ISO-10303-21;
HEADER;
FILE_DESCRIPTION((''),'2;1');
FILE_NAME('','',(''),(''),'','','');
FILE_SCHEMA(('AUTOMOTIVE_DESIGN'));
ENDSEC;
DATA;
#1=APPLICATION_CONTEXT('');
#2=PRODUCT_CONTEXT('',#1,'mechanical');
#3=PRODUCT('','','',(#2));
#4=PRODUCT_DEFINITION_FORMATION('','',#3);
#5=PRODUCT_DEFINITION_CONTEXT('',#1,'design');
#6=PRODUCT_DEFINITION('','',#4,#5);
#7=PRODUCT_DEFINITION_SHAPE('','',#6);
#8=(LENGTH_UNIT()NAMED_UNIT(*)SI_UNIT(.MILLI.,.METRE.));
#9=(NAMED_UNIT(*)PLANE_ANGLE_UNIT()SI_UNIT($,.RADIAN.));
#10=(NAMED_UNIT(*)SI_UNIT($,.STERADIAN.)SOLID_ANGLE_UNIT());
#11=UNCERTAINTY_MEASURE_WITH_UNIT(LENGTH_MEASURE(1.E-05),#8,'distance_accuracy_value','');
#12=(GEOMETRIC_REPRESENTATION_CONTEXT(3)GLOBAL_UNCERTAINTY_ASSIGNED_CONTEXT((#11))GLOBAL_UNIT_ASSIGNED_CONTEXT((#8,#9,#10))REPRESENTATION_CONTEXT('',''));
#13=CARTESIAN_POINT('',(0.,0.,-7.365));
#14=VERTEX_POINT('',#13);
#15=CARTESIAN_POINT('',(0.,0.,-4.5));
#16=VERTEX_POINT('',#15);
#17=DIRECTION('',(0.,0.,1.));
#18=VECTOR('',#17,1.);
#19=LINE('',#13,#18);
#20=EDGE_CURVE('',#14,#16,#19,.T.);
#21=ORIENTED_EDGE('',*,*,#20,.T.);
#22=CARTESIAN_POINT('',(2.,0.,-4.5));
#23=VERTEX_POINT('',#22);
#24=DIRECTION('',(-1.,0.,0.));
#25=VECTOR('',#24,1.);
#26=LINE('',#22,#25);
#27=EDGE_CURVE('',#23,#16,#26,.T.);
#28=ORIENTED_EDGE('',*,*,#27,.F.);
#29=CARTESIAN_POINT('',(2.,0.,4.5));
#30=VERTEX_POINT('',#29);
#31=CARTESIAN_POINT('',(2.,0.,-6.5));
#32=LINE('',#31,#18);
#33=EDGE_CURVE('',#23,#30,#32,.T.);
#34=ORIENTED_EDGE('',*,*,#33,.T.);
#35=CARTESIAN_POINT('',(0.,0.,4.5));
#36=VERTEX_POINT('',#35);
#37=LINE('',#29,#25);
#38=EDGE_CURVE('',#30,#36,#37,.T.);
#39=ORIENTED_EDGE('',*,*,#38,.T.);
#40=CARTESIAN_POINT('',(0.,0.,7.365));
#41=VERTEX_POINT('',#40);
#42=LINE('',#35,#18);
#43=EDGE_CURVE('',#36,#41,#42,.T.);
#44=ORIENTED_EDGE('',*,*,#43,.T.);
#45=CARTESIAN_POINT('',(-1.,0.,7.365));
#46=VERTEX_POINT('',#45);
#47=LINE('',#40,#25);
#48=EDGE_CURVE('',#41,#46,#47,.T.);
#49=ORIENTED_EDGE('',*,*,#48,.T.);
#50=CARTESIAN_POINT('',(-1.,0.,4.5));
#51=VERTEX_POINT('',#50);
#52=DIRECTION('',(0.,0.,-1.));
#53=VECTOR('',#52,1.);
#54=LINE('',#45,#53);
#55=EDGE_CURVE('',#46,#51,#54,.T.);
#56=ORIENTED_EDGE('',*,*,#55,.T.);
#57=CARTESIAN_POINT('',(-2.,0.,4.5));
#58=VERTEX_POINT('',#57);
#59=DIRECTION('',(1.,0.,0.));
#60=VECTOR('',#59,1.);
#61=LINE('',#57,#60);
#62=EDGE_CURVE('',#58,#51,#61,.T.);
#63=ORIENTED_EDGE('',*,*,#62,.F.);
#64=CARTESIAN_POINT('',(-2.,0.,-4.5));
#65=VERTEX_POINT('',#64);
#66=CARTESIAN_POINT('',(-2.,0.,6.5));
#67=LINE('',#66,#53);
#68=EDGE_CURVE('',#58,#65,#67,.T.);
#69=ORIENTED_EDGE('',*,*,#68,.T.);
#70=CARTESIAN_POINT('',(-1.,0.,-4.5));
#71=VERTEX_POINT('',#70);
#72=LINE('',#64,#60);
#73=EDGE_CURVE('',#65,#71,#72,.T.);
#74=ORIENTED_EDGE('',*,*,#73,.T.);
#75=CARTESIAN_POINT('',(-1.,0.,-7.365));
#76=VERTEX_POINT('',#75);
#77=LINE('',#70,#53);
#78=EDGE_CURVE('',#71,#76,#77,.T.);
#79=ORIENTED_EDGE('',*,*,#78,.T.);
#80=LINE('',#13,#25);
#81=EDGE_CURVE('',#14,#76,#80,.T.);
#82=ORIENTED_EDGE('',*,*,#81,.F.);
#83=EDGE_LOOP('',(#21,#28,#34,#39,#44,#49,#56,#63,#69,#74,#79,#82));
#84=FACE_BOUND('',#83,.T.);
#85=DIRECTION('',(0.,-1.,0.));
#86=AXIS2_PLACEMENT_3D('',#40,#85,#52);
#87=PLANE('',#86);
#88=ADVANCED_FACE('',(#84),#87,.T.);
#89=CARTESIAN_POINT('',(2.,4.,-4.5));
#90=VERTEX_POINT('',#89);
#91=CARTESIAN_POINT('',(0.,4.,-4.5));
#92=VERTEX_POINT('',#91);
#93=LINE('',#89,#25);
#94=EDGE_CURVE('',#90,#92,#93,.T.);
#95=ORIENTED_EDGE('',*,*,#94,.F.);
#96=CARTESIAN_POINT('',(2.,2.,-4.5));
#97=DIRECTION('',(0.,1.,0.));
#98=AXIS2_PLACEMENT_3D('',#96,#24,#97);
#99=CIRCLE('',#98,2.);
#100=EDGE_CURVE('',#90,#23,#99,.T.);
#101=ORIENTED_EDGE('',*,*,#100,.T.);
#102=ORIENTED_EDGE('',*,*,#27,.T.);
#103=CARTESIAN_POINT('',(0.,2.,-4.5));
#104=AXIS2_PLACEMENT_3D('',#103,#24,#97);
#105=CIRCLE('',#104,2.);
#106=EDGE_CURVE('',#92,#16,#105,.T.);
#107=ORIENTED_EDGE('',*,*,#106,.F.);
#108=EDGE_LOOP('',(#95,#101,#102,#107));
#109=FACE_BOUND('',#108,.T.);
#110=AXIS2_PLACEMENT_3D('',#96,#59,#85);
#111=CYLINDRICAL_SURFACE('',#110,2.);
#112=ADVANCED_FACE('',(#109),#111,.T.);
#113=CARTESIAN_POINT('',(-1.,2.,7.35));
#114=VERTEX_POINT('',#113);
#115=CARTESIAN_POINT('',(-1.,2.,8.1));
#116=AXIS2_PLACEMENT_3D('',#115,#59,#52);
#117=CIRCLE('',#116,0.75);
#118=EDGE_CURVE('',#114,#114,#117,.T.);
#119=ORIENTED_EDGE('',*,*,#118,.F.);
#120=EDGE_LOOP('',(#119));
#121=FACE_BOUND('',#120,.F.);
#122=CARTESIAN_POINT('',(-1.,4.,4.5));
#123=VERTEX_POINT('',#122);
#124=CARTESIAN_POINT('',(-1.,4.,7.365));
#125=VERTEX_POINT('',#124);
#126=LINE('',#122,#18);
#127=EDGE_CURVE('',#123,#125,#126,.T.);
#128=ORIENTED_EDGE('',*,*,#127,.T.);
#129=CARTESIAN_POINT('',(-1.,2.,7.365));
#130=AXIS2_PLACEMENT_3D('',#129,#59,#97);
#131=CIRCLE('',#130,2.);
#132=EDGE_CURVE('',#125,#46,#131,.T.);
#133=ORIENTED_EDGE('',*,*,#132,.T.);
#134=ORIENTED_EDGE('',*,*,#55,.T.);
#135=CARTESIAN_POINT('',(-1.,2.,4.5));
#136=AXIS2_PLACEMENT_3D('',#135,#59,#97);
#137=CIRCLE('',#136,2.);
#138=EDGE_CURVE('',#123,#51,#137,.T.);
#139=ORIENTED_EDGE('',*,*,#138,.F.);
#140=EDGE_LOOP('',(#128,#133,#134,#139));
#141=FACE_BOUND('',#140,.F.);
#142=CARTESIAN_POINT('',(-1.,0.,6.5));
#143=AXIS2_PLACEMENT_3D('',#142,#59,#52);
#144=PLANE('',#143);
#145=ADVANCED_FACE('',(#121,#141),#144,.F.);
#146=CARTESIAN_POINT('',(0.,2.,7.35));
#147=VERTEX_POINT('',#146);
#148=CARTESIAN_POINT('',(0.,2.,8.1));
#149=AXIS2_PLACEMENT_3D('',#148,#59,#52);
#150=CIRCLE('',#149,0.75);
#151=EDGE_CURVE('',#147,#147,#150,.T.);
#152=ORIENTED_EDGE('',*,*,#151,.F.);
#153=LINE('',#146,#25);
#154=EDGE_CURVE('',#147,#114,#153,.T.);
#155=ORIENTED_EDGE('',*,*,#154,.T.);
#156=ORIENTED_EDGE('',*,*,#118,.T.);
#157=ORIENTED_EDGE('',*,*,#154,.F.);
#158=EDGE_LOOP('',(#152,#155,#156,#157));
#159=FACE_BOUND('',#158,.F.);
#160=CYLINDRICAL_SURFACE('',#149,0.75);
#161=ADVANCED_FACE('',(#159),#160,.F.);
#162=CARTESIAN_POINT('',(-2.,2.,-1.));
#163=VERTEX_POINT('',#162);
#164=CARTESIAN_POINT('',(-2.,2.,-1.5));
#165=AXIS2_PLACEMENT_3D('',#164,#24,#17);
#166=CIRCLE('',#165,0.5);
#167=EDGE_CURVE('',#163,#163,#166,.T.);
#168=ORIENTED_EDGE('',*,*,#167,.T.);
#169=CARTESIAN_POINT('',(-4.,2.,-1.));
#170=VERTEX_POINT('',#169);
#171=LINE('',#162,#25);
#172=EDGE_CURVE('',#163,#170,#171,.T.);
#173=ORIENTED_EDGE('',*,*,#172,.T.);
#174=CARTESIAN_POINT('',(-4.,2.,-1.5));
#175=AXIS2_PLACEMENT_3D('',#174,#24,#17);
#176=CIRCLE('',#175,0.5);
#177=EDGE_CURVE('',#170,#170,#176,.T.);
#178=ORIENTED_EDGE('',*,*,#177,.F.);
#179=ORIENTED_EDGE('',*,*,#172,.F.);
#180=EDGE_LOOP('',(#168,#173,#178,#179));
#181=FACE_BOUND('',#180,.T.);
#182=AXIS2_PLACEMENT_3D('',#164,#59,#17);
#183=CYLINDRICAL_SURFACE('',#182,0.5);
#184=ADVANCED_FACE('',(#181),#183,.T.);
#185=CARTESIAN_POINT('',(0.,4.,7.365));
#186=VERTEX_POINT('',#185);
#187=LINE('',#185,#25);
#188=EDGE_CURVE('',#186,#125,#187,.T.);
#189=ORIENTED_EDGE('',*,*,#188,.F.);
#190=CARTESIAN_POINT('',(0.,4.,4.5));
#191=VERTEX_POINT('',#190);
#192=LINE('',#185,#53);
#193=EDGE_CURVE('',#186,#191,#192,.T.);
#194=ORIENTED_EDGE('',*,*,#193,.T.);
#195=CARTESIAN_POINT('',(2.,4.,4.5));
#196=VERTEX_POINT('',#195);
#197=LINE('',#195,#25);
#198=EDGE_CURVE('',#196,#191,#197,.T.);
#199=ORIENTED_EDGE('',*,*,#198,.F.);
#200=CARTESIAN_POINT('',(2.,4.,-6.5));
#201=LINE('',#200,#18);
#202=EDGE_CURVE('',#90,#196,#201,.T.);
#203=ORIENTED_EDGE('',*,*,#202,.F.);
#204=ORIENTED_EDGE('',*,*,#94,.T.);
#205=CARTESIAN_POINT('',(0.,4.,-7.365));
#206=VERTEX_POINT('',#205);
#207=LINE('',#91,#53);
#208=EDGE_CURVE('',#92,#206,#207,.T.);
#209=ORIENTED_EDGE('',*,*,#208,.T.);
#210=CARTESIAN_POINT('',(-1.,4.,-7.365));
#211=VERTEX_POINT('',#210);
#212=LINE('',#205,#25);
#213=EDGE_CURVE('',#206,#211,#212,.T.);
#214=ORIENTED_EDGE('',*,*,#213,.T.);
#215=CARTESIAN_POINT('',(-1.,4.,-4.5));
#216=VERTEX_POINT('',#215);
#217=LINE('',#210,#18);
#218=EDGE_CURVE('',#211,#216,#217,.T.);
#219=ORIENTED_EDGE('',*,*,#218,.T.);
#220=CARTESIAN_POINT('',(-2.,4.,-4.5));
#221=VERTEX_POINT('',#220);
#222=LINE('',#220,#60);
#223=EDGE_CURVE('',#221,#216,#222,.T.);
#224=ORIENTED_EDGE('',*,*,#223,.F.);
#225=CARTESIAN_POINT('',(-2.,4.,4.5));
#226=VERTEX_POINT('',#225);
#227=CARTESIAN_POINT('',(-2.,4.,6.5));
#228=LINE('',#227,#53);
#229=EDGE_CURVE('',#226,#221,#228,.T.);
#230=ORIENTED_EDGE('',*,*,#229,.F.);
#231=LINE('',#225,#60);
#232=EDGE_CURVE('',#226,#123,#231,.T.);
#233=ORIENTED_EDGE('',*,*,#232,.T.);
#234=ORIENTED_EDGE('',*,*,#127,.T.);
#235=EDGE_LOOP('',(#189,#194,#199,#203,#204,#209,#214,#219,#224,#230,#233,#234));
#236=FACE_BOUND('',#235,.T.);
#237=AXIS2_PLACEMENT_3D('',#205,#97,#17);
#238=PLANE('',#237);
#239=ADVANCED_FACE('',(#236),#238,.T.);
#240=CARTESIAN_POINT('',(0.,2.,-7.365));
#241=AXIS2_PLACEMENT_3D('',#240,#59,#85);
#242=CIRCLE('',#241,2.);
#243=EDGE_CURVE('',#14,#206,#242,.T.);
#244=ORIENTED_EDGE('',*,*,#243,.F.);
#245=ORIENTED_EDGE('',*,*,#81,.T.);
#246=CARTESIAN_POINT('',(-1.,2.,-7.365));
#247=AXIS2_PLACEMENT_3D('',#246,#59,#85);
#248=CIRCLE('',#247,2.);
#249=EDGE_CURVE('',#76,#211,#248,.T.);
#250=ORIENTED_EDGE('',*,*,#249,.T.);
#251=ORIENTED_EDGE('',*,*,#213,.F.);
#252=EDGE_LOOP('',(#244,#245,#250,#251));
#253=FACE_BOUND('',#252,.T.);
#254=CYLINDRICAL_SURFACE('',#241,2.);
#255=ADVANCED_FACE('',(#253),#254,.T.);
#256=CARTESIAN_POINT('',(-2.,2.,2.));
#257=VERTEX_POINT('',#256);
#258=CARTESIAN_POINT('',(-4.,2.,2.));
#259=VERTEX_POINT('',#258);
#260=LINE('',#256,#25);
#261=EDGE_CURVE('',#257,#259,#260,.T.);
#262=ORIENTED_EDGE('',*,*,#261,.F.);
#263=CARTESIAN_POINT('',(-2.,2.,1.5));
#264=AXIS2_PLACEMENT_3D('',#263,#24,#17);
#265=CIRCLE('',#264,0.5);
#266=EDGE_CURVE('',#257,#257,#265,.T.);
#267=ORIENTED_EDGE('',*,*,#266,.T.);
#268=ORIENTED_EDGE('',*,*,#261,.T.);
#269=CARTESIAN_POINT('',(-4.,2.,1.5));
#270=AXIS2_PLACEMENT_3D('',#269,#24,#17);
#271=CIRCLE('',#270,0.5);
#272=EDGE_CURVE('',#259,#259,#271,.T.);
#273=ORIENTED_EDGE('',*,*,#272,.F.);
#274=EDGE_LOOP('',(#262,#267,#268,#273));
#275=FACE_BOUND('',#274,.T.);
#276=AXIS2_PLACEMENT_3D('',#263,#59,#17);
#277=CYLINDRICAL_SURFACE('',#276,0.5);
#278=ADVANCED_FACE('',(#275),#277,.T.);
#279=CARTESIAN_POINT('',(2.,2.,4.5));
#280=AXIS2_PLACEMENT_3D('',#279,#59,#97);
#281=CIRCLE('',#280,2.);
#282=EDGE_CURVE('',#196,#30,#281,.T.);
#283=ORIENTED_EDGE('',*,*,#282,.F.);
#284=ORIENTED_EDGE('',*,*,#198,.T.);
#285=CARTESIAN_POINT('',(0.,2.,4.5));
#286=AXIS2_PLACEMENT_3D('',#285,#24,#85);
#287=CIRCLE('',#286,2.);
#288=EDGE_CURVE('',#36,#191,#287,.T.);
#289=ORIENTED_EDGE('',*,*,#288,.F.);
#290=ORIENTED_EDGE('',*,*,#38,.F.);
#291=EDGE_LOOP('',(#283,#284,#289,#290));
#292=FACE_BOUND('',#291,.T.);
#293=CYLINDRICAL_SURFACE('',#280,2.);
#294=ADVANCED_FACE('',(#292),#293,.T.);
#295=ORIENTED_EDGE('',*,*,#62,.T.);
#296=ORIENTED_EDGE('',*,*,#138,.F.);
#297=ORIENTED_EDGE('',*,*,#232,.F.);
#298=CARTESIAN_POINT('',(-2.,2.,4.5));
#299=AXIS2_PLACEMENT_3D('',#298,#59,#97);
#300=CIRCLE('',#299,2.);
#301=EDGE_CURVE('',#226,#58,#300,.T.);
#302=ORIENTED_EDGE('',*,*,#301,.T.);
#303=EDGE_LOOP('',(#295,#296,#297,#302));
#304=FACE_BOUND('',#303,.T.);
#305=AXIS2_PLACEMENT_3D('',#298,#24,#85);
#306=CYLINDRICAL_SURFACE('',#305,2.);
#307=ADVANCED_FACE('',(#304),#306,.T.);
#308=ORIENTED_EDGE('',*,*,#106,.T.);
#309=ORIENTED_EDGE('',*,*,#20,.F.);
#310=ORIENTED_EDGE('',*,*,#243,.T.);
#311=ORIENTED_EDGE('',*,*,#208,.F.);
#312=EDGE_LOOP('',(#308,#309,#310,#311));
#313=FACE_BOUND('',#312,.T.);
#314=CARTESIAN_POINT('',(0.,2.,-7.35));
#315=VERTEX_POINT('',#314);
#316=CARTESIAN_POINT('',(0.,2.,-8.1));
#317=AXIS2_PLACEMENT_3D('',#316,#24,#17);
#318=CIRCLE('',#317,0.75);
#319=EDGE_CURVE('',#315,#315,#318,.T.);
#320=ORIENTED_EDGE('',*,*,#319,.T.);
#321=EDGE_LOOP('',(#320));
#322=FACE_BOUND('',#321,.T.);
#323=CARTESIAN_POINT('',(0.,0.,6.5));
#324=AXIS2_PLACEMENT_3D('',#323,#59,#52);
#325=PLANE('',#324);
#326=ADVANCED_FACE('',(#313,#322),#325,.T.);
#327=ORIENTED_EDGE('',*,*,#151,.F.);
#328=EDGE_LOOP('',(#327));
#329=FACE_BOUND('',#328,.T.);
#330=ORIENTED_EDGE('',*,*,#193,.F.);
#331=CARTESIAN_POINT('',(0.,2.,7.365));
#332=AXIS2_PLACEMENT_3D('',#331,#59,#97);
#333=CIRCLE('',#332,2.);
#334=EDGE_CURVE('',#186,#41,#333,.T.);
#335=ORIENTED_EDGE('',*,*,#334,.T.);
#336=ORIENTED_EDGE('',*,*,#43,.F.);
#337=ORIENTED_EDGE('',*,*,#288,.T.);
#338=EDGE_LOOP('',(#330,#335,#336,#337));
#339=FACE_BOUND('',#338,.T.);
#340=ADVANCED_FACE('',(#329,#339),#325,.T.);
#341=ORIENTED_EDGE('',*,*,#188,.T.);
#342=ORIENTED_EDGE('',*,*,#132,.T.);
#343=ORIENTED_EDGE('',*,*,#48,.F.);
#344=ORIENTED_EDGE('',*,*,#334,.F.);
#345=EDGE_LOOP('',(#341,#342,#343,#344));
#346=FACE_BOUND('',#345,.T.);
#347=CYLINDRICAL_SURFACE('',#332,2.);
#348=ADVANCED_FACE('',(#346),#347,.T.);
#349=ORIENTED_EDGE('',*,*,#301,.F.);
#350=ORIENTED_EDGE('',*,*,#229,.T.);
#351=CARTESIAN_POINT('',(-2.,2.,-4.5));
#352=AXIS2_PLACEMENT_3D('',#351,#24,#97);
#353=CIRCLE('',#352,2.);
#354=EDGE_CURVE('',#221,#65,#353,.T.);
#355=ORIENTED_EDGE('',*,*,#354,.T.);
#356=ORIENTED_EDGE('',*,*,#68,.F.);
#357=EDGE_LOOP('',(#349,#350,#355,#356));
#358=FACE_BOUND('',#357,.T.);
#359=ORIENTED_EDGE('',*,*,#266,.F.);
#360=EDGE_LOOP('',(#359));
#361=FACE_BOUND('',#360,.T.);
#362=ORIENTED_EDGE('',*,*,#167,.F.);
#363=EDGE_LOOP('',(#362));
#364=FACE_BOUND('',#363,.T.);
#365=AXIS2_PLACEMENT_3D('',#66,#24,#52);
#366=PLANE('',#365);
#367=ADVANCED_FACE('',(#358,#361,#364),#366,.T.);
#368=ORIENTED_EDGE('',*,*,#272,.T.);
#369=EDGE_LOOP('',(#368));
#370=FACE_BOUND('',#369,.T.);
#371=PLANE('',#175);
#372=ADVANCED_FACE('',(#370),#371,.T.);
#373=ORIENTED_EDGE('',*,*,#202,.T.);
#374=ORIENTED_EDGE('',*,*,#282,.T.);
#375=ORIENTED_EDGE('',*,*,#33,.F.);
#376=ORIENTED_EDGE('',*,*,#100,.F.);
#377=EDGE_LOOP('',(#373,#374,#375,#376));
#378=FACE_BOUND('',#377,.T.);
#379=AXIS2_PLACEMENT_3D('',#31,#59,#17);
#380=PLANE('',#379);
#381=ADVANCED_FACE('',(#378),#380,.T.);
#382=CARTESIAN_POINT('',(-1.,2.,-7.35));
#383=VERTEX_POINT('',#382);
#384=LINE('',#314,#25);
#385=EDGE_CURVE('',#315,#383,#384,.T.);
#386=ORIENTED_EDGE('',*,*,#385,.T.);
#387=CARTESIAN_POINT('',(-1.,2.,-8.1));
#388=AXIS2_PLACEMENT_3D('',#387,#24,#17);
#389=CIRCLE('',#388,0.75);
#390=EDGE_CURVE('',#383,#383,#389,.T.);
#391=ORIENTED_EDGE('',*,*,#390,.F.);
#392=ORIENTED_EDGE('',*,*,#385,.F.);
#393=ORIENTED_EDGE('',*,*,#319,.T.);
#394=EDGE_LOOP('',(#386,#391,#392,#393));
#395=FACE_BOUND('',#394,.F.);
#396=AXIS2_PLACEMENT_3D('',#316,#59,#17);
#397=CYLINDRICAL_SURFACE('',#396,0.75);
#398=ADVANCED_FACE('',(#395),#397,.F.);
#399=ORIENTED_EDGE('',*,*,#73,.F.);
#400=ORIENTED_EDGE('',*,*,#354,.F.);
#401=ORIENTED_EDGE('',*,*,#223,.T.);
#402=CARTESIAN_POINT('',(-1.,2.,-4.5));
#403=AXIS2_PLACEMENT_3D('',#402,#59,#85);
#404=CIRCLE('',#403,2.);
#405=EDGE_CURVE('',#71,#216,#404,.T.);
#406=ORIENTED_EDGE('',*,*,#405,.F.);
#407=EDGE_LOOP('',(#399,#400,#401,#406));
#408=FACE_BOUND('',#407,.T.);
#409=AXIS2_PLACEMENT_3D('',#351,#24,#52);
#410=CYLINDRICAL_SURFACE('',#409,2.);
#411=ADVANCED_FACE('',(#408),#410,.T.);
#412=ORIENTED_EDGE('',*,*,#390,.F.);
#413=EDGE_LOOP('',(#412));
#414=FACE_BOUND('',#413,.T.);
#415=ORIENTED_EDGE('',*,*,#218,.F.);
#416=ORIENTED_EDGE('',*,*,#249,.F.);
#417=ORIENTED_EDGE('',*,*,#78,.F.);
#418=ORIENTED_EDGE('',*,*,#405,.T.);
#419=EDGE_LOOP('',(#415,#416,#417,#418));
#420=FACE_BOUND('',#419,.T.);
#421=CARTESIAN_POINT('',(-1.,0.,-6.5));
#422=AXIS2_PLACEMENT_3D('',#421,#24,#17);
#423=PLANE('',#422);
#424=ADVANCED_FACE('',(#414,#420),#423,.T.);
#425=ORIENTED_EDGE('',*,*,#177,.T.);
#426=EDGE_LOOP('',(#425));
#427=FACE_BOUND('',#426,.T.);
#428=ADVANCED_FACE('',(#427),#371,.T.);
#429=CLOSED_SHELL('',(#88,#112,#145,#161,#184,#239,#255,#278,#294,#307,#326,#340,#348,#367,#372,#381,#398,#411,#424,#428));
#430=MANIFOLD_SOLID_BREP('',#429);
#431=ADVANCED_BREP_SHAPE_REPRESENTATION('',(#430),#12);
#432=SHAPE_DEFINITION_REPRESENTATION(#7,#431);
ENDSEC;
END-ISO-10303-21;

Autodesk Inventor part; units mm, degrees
ref_plane "YZ Plane" through (0, 0, 0) normal (1, 0, 0) x (0, 1, 0)
ref_plane "XZ Plane" through (0, 0, 0) normal (0, 1, 0) x (-1, 0, 0)
ref_plane "XY Plane" through (0, 0, 0) normal (0, 0, 1) x (1, 0, 0)
sketch "Sketch1" plane through (0, 0, 0) normal (0, 1, 0) x (-1, 0, 0)
  line L0 (-2, 6.5) -> (2, 6.5)
  line L1 (2, 6.5) -> (2, -6.5)
  line L2 (2, -6.5) -> (-2, -6.5)
  line L3 (-2, -6.5) -> (-2, 6.5)
  line L4 (-2, 6.5) -> (2, -6.5) construction
  line L5 (2, 6.5) -> (-2, -6.5) construction
  point P0 (0, 0)
  dimension "d0" = 4
  dimension "d1" = 13
extrude "Extrusion1" add sketch "Sketch1" along normal blind 4
sketch "Sketch2" plane through (2, 0, 6.5) normal (1, 0, 0) x (0, 0, -1)
  line L0 (0, 0) -> (0, 4) projected
  line L1 (0, 2) -> (13, 2) construction
  line L2 (13, 0) -> (13, 4) projected
  line L3 (2, 0) -> (11, 0)
  line L4 (11, 4) -> (2, 4)
  arc A0 (2, 4) -> (2, 0) centre (2, 2) ccw
  arc A1 (11, 0) -> (11, 4) centre (11, 2) ccw
  line L5 (0, 4) -> (13, 4) projected
  line L6 (0, 0) -> (13, 0) projected
  point P0 (6.5, 0)
  point P1 (6.5, 2)
extrude "Extrusion2" cut sketch "Sketch2" against normal blind 2 contours L0 A0 L6 | L0 L5 A0 | A1 L2 L6 | L5 L2 A1
sketch "Sketch3" plane through (-2, 0, -6.5) normal (-1, 0, 0) x (0, 0, 1)
  arc A0 (2, 4) -> (0, 2) centre (2, 2) ccw projected
  line L0 (0, 0) -> (0, 4) projected
  line L1 (0, 4) -> (13, 4) projected
  arc A1 (0, 2) -> (2, 0) centre (2, 2) ccw projected
  arc A2 (2, 4) -> (2, 0) centre (2, 2) ccw projected
  line L2 (11, 4) -> (2, 4) projected
  arc A3 (11, 0) -> (11, 4) centre (11, 2) ccw projected
  line L3 (11, 0) -> (2, 0) projected
  line L4 (13, 0) -> (13, 4) projected
  line L5 (0, 0) -> (13, 0) projected
  point P0 (6.5, 0)
  point P1 (13, 2)
extrude "Extrusion3" cut sketch "Sketch3" against normal blind 1 contours A0 L0 L1 | A1 L5 L0 | L1 L4 A3 | L4 L5 A3
sketch "Sketch4" plane through (-2, 0, -4.5) normal (-1, 0, 0) x (0, 0, 1)
  arc A0 (0, 4) -> (-2, 2) centre (0, 2) ccw projected
  circle A1 centre (0, 2) radius 1.5
  arc A2 (11, 2) -> (9, 4) centre (9, 2) ccw projected
  circle A3 centre (9, 2) radius 1.5
  point P0 (4.5, 0)
  dimension "d8" = 3
  dimension "d9" = 3
mark "Mark1"
sketch "Sketch5" plane through (-2, 0, -4.5) normal (-1, 0, 0) x (0, 0, 1)
  circle A0 centre (3, 2) radius 1
  circle A1 centre (0, 2) radius 1.5 projected
  circle A2 centre (9, 2) radius 1.5 projected
  line L0 (0, 4) -> (9, 4) projected
  circle A3 centre (6, 2) radius 1
  point P0 (4.5, 0)
  dimension "d10" = 2
  dimension "d11" = 3
  dimension "d12" = 9
  dimension "d15" = 3
mark "Mark2"
sketch "Sketch6" plane through (-2, 2, -1.5) normal (-1, 0, 0) x (0, 0, 1)
  circle A0 centre (0, 0) radius 1 projected
  circle A1 centre (0, 0) radius 0.5
  circle A2 centre (3, 0) radius 1 projected
  circle A3 centre (3, 0) radius 0.5
  point P0 (1.5, -2)
  dimension "d20" = 1
  dimension "d21" = 1
extrude "Extrusion4" add sketch "Sketch6" along normal blind 2 contours A1 | A3
sketch "Sketch7" plane through (2, 0, 4.5) normal (1, 0, 0) x (0, 0, -1)
  circle A0 centre (0, 2) radius 1.5 projected
  circle A1 centre (9, 2) radius 1.5 projected
  point P0 (4.5, 0)
mark "Mark3"
sketch "Sketch8" plane through (2, 0, 4.5) normal (1, 0, 0) x (0, 0, -1)
  circle A0 centre (6, 2) radius 1 projected
  circle A1 centre (3, 2) radius 1 projected
  circle A2 centre (3, 2) radius 0.75
  circle A3 centre (6, 2) radius 0.75
  point P0 (4.5, 0)
  dimension "d24" = 1.5
  dimension "d25" = 1.5
mark "Mark4"
sketch "Sketch11" plane through (0, 0, 6.5) normal (1, 0, 0) x (0, 0, -1)
  line L0 (-2.865, 2) -> (15.865, 2) construction
  line L1 (-0.865, 0) -> (13.865, 0)
  line L2 (13.865, 4) -> (-0.865, 4)
  arc A0 (-0.865, 4) -> (-0.865, 0) centre (-0.865, 2) ccw
  arc A1 (13.865, 0) -> (13.865, 4) centre (13.865, 2) ccw
  line L3 (2, 0) -> (11, 0) projected
  point P0 (6.5, 0)
  point P1 (6.5, 2)
  point P2 (6.5, 4)
  point P3 (6.5, 0)
  dimension "d31" = 18.73
extrude "Extrusion7" add sketch "Sketch11" against normal blind 1
sketch "Sketch12" plane through (0, 0, 6.5) normal (1, 0, 0) x (0, 0, -1)
  arc A0 (-0.865, 4) -> (-0.865, 0) centre (-0.865, 2) ccw projected
  circle A1 centre (-1.6, 2) radius 0.75
  circle A2 centre (2, 2) radius 1.5 projected
  point P0 (6.5, 0)
  dimension "d34" = 1.5
  dimension "d35" = 3.6
extrude "Extrusion8" cut sketch "Sketch12" against normal blind 1 contours A1
mirror "Mirror1" about plane through (0, 0, 0) normal (0, 0, 1) of "Extrusion8"
equation "\"d9\" = d8"
equation "\"d11\" = 0.333333 * d12"
equation "\"d15\" = d11"
equation "\"d21\" = d20"
equation "\"d25\" = d24"
properties part number "2_pin_ear_female"
